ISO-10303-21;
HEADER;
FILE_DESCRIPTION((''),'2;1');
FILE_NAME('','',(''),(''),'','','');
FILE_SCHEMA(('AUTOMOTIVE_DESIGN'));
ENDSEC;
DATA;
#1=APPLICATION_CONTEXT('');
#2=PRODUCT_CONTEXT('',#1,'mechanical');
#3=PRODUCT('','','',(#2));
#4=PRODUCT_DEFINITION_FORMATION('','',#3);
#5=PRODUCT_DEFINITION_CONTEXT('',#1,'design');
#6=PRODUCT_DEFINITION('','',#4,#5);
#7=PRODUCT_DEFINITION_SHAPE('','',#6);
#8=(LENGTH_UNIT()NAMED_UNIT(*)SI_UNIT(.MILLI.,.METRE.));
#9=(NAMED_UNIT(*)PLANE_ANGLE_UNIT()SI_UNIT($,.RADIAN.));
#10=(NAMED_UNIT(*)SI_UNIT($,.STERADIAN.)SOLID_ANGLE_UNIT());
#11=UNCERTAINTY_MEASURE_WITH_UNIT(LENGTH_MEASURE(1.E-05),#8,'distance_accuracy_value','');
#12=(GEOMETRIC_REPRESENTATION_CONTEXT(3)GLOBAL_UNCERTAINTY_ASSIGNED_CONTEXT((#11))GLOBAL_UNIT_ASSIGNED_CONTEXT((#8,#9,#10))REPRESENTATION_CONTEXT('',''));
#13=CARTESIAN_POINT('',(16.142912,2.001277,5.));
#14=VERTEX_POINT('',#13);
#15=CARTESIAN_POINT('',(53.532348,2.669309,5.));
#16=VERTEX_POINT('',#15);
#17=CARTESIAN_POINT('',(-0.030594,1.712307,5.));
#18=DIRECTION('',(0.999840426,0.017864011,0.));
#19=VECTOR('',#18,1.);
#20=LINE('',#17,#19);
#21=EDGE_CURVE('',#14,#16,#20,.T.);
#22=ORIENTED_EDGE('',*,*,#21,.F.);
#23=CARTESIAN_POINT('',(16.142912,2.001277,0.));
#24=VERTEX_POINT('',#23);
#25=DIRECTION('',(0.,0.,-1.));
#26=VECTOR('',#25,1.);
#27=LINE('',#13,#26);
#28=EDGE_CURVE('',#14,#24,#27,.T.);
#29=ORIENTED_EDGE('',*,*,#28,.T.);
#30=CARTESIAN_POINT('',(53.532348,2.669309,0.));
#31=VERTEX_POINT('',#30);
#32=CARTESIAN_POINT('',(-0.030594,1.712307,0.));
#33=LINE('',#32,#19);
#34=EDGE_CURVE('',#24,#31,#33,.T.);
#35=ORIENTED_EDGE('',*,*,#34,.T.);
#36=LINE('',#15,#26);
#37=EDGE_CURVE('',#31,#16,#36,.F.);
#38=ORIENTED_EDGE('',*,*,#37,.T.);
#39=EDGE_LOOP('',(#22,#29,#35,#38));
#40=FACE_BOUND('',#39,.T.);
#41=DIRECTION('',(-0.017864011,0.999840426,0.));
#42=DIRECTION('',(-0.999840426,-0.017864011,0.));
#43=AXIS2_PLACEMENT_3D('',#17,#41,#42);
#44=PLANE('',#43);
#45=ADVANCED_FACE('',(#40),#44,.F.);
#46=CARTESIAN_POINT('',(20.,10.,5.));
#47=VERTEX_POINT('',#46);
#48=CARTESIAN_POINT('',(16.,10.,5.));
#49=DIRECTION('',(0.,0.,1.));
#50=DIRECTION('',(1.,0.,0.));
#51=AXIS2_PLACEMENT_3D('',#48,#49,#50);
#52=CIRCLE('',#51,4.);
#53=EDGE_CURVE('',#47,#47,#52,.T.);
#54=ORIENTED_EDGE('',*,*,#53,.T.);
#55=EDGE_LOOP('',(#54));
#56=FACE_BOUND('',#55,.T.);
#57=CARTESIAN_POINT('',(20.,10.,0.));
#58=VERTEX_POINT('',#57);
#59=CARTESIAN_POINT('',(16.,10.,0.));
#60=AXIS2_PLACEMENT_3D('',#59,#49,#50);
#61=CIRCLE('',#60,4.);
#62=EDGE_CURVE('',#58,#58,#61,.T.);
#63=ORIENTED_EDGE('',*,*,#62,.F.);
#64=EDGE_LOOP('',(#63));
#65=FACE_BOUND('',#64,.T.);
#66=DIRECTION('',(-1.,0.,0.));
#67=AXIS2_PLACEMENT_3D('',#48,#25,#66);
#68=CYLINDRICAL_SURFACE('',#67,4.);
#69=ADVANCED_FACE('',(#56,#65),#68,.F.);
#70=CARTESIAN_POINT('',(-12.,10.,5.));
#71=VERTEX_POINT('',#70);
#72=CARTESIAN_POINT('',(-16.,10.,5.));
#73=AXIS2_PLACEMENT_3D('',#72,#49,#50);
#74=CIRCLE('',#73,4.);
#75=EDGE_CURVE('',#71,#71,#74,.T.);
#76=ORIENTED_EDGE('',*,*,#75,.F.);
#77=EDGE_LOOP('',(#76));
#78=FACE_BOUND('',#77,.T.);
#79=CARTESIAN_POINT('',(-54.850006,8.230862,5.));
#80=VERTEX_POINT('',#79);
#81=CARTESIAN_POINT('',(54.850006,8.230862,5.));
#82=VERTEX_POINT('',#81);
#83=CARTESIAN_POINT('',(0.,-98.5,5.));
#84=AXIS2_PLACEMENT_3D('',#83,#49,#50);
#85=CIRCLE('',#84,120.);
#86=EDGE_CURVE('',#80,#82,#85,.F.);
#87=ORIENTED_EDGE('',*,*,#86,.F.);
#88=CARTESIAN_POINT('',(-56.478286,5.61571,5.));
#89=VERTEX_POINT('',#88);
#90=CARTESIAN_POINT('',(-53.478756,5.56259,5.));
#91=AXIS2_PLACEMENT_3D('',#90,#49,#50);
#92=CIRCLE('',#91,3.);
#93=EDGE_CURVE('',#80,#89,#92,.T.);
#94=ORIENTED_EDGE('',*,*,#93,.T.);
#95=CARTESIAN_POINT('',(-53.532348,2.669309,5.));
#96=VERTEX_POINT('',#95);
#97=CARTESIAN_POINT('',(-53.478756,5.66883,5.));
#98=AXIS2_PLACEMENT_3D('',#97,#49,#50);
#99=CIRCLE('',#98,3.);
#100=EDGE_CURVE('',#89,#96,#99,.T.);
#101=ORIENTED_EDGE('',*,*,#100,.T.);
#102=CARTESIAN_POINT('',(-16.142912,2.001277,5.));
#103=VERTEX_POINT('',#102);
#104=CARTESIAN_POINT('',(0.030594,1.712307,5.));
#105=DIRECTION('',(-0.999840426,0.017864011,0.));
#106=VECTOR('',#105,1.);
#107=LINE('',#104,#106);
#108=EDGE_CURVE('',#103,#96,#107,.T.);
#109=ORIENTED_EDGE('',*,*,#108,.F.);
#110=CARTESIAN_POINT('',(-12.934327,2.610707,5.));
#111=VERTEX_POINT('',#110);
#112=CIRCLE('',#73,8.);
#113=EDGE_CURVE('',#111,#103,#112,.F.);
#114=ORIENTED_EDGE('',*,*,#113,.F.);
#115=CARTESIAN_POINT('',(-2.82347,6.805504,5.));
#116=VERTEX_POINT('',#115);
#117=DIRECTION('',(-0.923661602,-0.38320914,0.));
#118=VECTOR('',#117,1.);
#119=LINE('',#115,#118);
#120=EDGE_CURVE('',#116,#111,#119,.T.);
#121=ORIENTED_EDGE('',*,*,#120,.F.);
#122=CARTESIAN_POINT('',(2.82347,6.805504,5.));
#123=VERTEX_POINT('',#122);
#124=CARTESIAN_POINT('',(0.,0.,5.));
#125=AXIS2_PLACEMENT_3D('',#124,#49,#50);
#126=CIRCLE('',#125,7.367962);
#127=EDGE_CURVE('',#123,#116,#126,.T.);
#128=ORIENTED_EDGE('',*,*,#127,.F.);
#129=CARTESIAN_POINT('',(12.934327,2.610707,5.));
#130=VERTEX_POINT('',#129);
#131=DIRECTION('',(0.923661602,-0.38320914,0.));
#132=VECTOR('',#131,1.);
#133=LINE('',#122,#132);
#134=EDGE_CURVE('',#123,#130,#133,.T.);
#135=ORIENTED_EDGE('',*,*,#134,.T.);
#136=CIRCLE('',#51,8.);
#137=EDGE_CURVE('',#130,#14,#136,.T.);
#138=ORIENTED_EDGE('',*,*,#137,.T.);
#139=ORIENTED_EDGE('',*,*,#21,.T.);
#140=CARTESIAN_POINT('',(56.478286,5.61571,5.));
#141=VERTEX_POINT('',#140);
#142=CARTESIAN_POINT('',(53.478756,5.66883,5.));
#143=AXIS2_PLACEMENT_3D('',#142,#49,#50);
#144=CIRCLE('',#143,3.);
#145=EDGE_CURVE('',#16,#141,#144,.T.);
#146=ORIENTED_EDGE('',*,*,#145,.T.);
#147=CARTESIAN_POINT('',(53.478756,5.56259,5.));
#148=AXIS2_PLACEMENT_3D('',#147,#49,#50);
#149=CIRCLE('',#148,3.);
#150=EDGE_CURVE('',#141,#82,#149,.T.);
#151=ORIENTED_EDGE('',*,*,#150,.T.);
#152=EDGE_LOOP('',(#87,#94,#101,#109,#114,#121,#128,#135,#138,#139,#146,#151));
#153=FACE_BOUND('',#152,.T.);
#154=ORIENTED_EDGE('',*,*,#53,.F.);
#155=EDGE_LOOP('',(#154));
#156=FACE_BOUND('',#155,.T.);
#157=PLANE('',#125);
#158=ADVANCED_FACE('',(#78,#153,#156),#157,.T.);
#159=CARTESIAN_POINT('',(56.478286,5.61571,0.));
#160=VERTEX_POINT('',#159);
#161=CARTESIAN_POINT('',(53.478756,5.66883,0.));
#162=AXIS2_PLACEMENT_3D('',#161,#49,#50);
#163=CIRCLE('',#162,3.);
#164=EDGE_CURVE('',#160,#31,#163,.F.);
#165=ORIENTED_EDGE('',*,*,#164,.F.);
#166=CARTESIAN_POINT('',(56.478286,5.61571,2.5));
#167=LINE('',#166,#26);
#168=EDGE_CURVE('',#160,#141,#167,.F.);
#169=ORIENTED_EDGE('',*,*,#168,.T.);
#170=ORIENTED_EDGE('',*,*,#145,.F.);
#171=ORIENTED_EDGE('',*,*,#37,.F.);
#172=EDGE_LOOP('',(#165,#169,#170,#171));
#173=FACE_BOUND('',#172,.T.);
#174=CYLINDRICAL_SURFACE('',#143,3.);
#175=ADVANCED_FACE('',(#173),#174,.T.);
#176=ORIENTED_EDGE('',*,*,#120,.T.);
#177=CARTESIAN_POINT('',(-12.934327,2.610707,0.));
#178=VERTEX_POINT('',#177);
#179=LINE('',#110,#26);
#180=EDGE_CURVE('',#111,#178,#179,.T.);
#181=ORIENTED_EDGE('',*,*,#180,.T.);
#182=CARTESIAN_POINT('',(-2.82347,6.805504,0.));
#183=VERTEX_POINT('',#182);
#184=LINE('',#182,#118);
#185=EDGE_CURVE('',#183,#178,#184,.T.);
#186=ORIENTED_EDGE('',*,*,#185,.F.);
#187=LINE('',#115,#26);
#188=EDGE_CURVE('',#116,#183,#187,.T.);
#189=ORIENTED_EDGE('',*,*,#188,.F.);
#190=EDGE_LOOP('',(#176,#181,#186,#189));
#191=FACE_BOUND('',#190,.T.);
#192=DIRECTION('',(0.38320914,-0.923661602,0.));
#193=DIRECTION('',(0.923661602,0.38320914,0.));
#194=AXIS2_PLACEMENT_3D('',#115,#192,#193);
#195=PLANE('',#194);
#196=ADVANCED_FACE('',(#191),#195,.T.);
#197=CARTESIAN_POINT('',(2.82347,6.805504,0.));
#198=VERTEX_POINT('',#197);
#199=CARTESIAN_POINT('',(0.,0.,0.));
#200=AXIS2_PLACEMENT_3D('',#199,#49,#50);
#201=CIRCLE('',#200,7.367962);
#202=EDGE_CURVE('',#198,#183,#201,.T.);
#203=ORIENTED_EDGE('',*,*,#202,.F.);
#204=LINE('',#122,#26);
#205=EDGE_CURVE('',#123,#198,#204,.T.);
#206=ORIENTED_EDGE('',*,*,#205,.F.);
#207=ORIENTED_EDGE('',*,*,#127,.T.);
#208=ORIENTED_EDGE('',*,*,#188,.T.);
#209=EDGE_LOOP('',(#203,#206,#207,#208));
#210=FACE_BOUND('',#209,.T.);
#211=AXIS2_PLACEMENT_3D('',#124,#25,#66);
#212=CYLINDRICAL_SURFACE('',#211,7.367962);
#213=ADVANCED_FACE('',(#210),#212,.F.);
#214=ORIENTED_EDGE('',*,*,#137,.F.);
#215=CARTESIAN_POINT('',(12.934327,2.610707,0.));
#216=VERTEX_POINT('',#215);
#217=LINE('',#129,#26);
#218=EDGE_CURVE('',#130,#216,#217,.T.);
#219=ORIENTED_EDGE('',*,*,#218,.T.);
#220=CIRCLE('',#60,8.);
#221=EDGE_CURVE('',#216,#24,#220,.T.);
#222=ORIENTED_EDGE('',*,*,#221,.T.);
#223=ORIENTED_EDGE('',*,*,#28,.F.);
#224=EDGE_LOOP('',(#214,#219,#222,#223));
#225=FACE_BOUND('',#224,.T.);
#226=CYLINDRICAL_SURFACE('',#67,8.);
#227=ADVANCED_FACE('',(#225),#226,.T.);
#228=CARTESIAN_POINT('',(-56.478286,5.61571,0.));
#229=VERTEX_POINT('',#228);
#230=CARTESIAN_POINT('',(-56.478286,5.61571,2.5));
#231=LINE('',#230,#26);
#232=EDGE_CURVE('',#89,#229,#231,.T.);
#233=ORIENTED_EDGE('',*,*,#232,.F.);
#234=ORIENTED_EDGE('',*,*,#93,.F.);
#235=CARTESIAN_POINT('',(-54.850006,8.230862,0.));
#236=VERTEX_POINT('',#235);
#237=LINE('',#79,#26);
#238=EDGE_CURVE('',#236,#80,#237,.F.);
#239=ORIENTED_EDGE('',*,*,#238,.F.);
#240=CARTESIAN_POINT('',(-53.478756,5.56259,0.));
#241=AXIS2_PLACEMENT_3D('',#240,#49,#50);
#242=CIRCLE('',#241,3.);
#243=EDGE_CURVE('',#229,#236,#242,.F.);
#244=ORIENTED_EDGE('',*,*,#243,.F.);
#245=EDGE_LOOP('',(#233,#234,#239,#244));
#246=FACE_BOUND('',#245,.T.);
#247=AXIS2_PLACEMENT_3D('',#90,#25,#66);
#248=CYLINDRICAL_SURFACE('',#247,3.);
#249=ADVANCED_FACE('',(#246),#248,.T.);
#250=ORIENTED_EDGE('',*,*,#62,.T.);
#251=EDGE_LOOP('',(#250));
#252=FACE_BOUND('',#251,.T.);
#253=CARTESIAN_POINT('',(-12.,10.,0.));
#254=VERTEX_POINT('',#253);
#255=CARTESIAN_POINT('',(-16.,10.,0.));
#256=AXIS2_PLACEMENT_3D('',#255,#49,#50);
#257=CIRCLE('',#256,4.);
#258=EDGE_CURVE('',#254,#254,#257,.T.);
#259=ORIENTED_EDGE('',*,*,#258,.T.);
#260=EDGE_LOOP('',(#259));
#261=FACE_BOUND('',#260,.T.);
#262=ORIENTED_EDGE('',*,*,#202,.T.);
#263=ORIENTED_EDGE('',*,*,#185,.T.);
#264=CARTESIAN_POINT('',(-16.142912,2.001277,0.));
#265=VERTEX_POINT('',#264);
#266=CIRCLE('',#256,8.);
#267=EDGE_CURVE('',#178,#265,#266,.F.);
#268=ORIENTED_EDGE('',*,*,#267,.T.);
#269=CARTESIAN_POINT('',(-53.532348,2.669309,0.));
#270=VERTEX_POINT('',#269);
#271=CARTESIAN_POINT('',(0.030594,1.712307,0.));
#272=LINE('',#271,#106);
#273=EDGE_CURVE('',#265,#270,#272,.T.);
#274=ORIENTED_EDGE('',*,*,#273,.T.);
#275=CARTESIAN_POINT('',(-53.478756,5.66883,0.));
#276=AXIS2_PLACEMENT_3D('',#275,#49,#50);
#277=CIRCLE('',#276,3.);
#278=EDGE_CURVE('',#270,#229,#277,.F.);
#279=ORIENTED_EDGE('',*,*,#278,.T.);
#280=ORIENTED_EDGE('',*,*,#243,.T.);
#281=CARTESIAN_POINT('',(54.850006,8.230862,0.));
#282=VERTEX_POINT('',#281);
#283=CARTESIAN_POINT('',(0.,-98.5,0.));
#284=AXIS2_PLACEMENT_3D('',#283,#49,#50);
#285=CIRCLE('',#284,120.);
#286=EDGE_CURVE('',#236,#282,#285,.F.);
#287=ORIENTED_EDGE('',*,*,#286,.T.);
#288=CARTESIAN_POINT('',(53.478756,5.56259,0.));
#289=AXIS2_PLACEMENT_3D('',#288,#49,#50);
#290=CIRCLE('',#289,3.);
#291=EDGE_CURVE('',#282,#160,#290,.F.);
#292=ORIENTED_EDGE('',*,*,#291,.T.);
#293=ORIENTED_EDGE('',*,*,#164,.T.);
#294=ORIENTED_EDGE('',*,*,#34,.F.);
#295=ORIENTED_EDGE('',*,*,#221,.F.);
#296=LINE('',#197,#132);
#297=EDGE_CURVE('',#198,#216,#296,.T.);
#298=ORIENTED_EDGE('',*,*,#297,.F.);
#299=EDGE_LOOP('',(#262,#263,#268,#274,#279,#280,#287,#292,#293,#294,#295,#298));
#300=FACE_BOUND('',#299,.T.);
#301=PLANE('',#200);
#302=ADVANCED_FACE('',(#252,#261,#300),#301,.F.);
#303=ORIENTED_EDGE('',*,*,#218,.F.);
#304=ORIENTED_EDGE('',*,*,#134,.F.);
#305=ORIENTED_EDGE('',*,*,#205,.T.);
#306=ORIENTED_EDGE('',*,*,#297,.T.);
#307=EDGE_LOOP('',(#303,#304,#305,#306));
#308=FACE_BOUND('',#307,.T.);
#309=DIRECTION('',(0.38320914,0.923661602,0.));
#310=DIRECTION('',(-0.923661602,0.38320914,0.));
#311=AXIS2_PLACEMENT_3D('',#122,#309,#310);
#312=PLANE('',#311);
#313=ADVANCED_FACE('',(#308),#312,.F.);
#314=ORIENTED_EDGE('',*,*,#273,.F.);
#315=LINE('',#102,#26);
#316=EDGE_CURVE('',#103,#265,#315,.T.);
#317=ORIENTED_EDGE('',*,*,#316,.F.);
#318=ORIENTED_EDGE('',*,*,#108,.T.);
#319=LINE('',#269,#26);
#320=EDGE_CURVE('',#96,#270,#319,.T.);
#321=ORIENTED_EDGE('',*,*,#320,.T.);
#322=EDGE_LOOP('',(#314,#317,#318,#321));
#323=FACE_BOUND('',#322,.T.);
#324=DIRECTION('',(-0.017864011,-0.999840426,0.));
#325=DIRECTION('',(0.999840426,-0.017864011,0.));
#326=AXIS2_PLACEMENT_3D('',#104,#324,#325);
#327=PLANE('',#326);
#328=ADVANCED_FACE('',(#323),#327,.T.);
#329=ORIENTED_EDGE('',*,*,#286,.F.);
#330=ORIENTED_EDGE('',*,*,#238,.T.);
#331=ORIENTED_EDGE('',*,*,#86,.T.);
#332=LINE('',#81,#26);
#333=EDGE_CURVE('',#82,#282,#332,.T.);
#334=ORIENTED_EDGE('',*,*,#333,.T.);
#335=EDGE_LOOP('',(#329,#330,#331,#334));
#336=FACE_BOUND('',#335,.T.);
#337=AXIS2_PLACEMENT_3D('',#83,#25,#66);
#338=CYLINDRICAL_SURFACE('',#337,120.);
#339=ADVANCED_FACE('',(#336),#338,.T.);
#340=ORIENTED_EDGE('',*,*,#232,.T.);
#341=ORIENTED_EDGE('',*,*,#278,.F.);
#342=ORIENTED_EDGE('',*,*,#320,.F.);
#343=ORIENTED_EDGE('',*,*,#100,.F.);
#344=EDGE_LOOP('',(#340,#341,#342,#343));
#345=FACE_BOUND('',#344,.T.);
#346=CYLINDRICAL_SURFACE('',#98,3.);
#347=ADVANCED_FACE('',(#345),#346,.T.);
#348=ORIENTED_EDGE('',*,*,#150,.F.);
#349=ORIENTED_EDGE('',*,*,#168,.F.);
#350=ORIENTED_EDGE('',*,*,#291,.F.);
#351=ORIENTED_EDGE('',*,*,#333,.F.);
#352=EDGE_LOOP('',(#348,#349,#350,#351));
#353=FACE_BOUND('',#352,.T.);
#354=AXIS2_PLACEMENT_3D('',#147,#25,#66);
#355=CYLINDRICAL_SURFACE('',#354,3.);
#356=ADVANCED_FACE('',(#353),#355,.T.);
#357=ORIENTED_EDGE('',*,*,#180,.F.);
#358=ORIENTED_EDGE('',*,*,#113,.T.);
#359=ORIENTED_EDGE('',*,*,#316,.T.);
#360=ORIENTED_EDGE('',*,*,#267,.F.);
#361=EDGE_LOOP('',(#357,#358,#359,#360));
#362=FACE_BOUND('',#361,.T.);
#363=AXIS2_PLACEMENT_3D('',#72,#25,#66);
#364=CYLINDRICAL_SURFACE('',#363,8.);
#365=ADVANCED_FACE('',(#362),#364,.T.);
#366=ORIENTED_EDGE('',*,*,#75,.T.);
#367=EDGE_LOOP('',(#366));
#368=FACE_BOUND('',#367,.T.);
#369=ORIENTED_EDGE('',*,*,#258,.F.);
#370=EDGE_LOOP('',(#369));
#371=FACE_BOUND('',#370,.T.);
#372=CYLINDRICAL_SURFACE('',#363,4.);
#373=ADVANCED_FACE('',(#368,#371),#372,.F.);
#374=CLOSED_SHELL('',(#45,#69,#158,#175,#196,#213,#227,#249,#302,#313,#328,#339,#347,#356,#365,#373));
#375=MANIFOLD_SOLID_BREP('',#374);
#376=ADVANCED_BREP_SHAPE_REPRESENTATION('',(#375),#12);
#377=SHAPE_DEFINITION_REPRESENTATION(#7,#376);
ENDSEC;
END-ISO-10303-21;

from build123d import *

# Parameters (mm, degrees)
SKETCH1_R           = 4
BOSS_EXTRUDE2_DEPTH = 5
FILLET3_R           = 3


with BuildPart() as part:
    # Sketch1 → Boss-Extrude2 (new body)
    with BuildSketch(Plane.XY):
        with BuildLine():
            ThreePointArc((-2.823470485, 6.805503827), (0, 7.367962264), (2.823470485, 6.805503827))
            Line((2.823470485, 6.805503827), (12.934326877, 2.610707185))
            ThreePointArc((12.934326877, 2.610707185), (14.507189087, 2.140514293), (16.142912091, 2.001276593))
            Line((16.142912091, 2.001276593), (56.478756137, 2.721951573))
            Line((56.478756137, 2.721951573), (56.478756137, 7.377996322))
            ThreePointArc((56.478756137, 7.377996322), (0, 21.5), (-56.478756137, 7.377996322))
            Line((-56.478756137, 7.377996322), (-56.478756137, 2.721951573))
            Line((-56.478756137, 2.721951573), (-16.142912091, 2.001276593))
            ThreePointArc((-16.142912091, 2.001276593), (-14.507189087, 2.140514293), (-12.934326877, 2.610707185))
            Line((-12.934326877, 2.610707185), (-2.823470485, 6.805503827))
        make_face()
        with Locations((-16, 10)):
            Circle(SKETCH1_R, mode=Mode.SUBTRACT)
        with Locations((16, 10)):
            Circle(SKETCH1_R, mode=Mode.SUBTRACT)
    extrude(amount=BOSS_EXTRUDE2_DEPTH)

    # Fillet3
    # the kernel refuses this fillet: 3 mm, written as the material it takes off along each edge
    with BuildSketch(Plane(origin=(56.478756137, 2.721951573, -7.367195529), x_dir=(-0.9998404258161971, -0.017864011410817362, 0), z_dir=(0, 0, 1)), Plane(origin=(-56.478756137, 2.721951573, -7.367195529), x_dir=(0, 1, 0), z_dir=(0, 0, 1))) as fillet3_piece_1:
        with BuildLine():
            CenterArc((FILLET3_R * 0.982292737151, -FILLET3_R), FILLET3_R, 90, 88.976413094)
            Line((-FILLET3_R * 0.0175476886652, -FILLET3_R * 0.982135988589), (0, 0))
            Line((0, 0), (FILLET3_R * 0.982292737151, 0))
        make_face()
    extrude(amount=19.734391057, mode=Mode.SUBTRACT)
    with BuildSketch(Plane(origin=(56.478756137, 7.377996322, -4.596333569), x_dir=(0, -1, 0), z_dir=(0, 0, 1))) as fillet3_piece_2:
        with BuildLine():
            CenterArc((1.8154063, -3), FILLET3_R, 90, 62.800936738)
            ThreePointArc((-0.852865239, -1.628749843), (-0.429551947, -0.812741542), (0, 0))
            Line((0, 0), (1.8154063, 0))
        make_face()
    extrude(amount=14.192667139, mode=Mode.SUBTRACT)
    with BuildSketch(Plane(origin=(-56.478756137, 7.377996322, -4.596333569), x_dir=(0, -1, 0), z_dir=(0, 0, 1))) as fillet3_piece_3:
        with BuildLine():
            CenterArc((1.8154063, 3), FILLET3_R, 207.199063262, 62.800936738)
            ThreePointArc((-0.852865239, 1.628749843), (-0.429551947, 0.812741542), (0, 0))
            Line((0, 0), (1.8154063, 0))
        make_face()
    extrude(amount=14.192667139, mode=Mode.SUBTRACT)


solid = part.part
